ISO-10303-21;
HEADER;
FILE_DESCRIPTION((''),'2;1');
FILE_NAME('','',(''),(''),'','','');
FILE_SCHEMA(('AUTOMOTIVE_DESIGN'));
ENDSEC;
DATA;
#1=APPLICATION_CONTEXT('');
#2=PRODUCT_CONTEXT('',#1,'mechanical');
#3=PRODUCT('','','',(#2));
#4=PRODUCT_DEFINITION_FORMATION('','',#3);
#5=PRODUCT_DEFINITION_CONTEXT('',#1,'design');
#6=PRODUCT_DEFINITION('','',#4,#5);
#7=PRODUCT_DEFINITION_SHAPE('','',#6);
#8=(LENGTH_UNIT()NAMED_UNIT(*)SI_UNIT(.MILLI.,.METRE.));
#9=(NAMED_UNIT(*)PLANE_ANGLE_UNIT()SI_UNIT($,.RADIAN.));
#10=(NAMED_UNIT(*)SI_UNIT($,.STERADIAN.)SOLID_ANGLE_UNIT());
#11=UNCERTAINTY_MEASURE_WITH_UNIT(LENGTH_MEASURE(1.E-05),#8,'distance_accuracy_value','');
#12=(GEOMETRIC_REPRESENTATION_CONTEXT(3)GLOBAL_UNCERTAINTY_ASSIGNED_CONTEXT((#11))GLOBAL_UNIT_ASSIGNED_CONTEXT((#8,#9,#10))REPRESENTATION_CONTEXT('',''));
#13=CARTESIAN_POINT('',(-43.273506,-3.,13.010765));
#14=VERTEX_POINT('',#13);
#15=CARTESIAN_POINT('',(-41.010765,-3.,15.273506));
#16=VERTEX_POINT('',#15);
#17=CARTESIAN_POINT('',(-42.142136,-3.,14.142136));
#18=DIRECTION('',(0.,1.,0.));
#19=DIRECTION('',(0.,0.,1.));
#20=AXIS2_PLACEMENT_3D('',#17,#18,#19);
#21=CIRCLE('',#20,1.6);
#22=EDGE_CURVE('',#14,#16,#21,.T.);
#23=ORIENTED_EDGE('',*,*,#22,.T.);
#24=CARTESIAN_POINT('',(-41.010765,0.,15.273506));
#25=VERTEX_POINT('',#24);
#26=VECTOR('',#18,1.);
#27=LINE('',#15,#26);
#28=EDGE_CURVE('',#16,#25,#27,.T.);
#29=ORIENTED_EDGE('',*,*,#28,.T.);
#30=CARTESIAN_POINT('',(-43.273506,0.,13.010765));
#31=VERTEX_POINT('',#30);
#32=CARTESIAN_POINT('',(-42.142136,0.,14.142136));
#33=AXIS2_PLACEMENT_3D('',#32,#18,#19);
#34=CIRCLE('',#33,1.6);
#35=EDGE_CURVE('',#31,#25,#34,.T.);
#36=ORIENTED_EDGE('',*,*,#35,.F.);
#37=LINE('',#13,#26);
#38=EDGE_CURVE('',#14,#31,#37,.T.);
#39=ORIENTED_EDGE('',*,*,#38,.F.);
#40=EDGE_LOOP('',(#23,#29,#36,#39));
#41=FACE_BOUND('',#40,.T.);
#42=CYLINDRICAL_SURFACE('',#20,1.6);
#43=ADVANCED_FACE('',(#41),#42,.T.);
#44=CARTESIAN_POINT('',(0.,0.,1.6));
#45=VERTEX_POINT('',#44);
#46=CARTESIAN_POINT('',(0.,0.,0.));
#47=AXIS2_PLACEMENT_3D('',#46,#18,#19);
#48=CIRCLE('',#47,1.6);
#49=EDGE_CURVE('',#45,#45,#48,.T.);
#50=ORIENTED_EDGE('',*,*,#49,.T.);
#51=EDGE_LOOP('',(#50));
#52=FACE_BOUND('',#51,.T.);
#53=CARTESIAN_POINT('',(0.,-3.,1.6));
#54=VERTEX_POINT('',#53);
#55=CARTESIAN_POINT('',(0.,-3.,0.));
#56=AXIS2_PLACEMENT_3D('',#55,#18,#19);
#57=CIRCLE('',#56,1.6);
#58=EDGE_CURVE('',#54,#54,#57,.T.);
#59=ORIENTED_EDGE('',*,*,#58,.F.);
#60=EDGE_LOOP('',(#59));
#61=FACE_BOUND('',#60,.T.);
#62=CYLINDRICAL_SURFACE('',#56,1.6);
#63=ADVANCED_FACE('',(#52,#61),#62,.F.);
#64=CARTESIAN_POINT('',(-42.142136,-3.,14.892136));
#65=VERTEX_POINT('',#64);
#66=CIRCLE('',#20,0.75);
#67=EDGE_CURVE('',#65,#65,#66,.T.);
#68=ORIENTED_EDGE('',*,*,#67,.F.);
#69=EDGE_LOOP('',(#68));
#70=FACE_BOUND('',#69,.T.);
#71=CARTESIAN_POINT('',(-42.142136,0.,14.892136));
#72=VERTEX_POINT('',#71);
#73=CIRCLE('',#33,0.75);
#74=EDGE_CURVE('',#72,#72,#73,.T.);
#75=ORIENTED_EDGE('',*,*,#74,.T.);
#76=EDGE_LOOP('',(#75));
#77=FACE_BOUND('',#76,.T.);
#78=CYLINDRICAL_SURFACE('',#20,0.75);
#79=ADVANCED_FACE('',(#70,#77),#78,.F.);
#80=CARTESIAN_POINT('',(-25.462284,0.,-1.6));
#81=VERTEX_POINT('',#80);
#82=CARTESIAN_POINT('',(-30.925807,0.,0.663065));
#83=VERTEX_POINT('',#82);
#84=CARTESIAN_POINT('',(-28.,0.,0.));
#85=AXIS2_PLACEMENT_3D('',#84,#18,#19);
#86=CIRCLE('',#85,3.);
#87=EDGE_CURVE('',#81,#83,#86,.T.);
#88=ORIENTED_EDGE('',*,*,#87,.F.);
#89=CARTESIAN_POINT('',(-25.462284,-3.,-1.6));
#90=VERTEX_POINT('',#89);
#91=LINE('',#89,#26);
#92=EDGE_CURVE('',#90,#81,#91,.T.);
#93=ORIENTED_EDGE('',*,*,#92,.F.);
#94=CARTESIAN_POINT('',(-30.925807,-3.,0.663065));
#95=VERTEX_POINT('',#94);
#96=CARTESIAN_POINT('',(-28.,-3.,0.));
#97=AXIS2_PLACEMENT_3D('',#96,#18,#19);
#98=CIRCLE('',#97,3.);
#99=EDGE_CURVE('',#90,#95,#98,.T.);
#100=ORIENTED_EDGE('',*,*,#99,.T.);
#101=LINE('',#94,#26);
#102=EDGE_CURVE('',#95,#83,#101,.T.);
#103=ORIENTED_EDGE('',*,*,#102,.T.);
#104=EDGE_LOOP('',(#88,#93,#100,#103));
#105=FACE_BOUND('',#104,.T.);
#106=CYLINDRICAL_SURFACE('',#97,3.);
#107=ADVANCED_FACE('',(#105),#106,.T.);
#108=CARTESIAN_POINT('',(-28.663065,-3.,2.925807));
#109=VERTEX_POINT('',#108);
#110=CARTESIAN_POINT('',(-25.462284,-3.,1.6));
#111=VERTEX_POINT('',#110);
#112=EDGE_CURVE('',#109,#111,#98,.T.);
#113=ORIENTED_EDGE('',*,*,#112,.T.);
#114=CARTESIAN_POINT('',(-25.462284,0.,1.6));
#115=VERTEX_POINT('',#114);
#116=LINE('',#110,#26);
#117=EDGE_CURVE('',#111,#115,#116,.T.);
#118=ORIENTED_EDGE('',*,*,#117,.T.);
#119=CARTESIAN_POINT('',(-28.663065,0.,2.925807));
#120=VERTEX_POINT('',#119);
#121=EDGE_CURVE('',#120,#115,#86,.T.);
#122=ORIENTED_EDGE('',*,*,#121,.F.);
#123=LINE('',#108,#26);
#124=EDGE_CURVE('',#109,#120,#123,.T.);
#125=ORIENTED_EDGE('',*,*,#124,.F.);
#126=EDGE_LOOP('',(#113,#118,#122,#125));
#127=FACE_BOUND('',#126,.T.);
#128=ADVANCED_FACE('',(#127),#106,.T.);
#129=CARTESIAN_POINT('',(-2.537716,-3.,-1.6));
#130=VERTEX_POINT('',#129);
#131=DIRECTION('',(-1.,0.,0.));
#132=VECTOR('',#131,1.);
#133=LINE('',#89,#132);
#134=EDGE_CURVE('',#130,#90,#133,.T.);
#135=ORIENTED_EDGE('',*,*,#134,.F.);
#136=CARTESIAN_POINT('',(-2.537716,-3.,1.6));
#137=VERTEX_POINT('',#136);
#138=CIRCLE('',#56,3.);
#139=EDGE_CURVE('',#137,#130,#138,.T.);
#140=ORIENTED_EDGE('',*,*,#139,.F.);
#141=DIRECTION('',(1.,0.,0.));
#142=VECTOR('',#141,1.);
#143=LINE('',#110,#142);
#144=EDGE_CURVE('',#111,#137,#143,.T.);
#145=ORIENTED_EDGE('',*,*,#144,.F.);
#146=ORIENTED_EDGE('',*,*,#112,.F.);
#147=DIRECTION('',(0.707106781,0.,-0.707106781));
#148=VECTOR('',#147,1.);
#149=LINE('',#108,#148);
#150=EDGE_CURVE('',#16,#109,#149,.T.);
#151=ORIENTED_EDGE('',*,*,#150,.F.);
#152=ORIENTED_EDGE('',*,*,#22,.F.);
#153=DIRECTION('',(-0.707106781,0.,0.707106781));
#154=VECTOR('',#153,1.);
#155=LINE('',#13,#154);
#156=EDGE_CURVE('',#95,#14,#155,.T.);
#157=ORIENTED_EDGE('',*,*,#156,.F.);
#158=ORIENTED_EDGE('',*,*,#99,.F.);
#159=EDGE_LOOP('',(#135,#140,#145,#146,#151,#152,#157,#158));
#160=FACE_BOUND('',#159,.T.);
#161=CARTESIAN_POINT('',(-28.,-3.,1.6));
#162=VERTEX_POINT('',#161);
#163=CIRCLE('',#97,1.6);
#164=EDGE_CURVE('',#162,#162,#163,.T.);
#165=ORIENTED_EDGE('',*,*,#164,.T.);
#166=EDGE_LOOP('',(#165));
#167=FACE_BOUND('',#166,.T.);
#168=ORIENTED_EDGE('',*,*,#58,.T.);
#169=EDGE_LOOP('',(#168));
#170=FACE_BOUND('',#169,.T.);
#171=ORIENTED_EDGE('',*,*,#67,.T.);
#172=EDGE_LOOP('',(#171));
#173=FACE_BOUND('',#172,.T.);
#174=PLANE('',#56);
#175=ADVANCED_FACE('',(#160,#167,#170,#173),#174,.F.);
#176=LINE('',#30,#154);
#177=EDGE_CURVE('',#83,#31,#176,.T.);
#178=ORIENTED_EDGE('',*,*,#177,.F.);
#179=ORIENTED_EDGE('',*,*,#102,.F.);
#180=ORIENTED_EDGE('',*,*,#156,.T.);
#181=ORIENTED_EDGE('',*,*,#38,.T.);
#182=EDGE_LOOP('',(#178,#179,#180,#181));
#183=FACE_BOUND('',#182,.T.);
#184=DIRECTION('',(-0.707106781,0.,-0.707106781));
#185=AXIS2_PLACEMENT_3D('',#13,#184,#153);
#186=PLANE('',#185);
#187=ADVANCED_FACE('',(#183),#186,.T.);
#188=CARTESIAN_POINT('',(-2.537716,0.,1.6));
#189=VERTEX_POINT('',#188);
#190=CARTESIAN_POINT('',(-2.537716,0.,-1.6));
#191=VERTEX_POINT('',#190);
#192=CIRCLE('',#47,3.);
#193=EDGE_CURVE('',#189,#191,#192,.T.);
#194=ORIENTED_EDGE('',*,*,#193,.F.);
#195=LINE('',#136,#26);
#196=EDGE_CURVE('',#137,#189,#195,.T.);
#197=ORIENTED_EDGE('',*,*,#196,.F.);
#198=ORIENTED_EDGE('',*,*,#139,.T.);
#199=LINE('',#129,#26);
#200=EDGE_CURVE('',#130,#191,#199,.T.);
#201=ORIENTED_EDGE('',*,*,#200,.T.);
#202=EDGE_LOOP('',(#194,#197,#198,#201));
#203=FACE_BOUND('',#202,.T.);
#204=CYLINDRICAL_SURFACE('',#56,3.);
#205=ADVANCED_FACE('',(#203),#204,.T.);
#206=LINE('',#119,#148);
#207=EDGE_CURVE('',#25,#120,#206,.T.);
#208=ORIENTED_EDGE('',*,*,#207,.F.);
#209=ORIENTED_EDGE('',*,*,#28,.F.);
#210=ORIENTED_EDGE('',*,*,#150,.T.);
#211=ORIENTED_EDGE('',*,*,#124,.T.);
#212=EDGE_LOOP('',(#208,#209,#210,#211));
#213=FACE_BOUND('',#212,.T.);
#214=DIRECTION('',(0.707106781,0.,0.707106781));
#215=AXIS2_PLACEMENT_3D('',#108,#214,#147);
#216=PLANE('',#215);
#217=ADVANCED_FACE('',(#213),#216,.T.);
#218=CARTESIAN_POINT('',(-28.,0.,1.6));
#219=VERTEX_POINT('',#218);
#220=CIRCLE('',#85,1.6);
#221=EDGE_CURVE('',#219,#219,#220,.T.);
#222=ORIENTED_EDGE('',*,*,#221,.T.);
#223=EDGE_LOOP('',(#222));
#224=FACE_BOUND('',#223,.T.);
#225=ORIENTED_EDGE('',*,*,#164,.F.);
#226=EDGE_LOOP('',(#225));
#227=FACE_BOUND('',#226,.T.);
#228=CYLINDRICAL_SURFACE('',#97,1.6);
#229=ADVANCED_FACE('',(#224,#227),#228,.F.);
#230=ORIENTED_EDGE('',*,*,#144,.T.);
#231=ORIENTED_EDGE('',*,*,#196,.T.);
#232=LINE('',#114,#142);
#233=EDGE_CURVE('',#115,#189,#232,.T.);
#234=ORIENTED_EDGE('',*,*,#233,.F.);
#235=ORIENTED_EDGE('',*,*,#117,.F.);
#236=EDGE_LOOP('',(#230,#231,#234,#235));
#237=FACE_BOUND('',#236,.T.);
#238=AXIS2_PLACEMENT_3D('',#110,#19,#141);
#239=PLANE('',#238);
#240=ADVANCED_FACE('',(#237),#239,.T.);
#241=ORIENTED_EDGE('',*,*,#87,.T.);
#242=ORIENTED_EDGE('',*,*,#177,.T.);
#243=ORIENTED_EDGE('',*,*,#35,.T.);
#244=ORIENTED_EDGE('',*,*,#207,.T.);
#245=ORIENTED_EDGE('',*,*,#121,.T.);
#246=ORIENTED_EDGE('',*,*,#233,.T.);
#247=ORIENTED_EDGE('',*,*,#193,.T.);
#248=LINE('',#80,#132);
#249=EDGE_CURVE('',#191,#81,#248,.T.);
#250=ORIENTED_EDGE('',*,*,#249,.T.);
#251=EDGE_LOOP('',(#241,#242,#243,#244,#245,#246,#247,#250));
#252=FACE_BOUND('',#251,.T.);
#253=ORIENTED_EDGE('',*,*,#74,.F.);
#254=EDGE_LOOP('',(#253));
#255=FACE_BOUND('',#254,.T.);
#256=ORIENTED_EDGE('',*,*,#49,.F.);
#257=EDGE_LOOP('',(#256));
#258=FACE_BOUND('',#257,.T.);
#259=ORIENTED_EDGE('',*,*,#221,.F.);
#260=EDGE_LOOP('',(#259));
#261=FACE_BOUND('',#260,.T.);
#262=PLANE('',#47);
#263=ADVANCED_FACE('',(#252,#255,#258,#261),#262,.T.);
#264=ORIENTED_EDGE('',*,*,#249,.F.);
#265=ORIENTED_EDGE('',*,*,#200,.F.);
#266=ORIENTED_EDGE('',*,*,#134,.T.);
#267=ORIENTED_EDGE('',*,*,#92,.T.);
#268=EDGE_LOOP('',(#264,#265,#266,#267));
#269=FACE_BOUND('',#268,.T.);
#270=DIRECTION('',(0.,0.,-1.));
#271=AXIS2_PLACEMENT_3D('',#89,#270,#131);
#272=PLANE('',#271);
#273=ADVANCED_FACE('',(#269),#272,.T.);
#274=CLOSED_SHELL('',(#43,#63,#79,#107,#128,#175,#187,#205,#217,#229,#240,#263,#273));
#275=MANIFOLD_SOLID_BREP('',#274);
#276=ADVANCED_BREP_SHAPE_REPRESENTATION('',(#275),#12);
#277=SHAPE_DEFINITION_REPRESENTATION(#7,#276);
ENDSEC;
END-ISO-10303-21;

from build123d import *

# Parameters (mm, degrees)
SKETCH_1_R             = 1.6
SKETCH_1_R_2           = 0.75
SM_BASE_FLANGE_1_DEPTH = 3


# Sheet-metal steps are written as plain solids
with BuildPart() as part:
    # Sketch 1 → 基体-法兰1 (new body)
    with BuildSketch(Plane(origin=(0, 0, 0), x_dir=(1, 0, 0), z_dir=(0, 1, 0))):
        with BuildLine():
            Line((-25.462284492, 1.6), (-2.537715508, 1.6))
            ThreePointArc((-2.537715508, 1.6), (3, 0), (-2.537715508, -1.6))
            Line((-2.537715508, -1.6), (-25.462284492, -1.6))
            ThreePointArc((-25.462284492, -1.6), (-26.851949703, -2.771638598), (-28.663064995, -2.925806694))
            Line((-28.663064995, -2.925806694), (-41.010764774, -15.273506474))
            ThreePointArc((-41.010764774, -15.273506474), (-43.273506474, -15.273506474), (-43.273506474, -13.010764774))
            Line((-43.273506474, -13.010764774), (-30.925806694, -0.663064995))
            ThreePointArc((-30.925806694, -0.663064995), (-29.148050297, 2.771638598), (-25.462284492, 1.6))
        make_face()
        with Locations(Location((0, 0, 0), (0, 0, 270))):
            Circle(SKETCH_1_R, mode=Mode.SUBTRACT)
        with Locations(Location((-28, 0, 0), (0, 0, 270))):
            Circle(SKETCH_1_R, mode=Mode.SUBTRACT)
        with Locations(Location((-42.142135624, -14.142135624, 0), (0, 0, 270))):
            Circle(SKETCH_1_R_2, mode=Mode.SUBTRACT)
    extrude(amount=-SM_BASE_FLANGE_1_DEPTH)


solid = part.part
